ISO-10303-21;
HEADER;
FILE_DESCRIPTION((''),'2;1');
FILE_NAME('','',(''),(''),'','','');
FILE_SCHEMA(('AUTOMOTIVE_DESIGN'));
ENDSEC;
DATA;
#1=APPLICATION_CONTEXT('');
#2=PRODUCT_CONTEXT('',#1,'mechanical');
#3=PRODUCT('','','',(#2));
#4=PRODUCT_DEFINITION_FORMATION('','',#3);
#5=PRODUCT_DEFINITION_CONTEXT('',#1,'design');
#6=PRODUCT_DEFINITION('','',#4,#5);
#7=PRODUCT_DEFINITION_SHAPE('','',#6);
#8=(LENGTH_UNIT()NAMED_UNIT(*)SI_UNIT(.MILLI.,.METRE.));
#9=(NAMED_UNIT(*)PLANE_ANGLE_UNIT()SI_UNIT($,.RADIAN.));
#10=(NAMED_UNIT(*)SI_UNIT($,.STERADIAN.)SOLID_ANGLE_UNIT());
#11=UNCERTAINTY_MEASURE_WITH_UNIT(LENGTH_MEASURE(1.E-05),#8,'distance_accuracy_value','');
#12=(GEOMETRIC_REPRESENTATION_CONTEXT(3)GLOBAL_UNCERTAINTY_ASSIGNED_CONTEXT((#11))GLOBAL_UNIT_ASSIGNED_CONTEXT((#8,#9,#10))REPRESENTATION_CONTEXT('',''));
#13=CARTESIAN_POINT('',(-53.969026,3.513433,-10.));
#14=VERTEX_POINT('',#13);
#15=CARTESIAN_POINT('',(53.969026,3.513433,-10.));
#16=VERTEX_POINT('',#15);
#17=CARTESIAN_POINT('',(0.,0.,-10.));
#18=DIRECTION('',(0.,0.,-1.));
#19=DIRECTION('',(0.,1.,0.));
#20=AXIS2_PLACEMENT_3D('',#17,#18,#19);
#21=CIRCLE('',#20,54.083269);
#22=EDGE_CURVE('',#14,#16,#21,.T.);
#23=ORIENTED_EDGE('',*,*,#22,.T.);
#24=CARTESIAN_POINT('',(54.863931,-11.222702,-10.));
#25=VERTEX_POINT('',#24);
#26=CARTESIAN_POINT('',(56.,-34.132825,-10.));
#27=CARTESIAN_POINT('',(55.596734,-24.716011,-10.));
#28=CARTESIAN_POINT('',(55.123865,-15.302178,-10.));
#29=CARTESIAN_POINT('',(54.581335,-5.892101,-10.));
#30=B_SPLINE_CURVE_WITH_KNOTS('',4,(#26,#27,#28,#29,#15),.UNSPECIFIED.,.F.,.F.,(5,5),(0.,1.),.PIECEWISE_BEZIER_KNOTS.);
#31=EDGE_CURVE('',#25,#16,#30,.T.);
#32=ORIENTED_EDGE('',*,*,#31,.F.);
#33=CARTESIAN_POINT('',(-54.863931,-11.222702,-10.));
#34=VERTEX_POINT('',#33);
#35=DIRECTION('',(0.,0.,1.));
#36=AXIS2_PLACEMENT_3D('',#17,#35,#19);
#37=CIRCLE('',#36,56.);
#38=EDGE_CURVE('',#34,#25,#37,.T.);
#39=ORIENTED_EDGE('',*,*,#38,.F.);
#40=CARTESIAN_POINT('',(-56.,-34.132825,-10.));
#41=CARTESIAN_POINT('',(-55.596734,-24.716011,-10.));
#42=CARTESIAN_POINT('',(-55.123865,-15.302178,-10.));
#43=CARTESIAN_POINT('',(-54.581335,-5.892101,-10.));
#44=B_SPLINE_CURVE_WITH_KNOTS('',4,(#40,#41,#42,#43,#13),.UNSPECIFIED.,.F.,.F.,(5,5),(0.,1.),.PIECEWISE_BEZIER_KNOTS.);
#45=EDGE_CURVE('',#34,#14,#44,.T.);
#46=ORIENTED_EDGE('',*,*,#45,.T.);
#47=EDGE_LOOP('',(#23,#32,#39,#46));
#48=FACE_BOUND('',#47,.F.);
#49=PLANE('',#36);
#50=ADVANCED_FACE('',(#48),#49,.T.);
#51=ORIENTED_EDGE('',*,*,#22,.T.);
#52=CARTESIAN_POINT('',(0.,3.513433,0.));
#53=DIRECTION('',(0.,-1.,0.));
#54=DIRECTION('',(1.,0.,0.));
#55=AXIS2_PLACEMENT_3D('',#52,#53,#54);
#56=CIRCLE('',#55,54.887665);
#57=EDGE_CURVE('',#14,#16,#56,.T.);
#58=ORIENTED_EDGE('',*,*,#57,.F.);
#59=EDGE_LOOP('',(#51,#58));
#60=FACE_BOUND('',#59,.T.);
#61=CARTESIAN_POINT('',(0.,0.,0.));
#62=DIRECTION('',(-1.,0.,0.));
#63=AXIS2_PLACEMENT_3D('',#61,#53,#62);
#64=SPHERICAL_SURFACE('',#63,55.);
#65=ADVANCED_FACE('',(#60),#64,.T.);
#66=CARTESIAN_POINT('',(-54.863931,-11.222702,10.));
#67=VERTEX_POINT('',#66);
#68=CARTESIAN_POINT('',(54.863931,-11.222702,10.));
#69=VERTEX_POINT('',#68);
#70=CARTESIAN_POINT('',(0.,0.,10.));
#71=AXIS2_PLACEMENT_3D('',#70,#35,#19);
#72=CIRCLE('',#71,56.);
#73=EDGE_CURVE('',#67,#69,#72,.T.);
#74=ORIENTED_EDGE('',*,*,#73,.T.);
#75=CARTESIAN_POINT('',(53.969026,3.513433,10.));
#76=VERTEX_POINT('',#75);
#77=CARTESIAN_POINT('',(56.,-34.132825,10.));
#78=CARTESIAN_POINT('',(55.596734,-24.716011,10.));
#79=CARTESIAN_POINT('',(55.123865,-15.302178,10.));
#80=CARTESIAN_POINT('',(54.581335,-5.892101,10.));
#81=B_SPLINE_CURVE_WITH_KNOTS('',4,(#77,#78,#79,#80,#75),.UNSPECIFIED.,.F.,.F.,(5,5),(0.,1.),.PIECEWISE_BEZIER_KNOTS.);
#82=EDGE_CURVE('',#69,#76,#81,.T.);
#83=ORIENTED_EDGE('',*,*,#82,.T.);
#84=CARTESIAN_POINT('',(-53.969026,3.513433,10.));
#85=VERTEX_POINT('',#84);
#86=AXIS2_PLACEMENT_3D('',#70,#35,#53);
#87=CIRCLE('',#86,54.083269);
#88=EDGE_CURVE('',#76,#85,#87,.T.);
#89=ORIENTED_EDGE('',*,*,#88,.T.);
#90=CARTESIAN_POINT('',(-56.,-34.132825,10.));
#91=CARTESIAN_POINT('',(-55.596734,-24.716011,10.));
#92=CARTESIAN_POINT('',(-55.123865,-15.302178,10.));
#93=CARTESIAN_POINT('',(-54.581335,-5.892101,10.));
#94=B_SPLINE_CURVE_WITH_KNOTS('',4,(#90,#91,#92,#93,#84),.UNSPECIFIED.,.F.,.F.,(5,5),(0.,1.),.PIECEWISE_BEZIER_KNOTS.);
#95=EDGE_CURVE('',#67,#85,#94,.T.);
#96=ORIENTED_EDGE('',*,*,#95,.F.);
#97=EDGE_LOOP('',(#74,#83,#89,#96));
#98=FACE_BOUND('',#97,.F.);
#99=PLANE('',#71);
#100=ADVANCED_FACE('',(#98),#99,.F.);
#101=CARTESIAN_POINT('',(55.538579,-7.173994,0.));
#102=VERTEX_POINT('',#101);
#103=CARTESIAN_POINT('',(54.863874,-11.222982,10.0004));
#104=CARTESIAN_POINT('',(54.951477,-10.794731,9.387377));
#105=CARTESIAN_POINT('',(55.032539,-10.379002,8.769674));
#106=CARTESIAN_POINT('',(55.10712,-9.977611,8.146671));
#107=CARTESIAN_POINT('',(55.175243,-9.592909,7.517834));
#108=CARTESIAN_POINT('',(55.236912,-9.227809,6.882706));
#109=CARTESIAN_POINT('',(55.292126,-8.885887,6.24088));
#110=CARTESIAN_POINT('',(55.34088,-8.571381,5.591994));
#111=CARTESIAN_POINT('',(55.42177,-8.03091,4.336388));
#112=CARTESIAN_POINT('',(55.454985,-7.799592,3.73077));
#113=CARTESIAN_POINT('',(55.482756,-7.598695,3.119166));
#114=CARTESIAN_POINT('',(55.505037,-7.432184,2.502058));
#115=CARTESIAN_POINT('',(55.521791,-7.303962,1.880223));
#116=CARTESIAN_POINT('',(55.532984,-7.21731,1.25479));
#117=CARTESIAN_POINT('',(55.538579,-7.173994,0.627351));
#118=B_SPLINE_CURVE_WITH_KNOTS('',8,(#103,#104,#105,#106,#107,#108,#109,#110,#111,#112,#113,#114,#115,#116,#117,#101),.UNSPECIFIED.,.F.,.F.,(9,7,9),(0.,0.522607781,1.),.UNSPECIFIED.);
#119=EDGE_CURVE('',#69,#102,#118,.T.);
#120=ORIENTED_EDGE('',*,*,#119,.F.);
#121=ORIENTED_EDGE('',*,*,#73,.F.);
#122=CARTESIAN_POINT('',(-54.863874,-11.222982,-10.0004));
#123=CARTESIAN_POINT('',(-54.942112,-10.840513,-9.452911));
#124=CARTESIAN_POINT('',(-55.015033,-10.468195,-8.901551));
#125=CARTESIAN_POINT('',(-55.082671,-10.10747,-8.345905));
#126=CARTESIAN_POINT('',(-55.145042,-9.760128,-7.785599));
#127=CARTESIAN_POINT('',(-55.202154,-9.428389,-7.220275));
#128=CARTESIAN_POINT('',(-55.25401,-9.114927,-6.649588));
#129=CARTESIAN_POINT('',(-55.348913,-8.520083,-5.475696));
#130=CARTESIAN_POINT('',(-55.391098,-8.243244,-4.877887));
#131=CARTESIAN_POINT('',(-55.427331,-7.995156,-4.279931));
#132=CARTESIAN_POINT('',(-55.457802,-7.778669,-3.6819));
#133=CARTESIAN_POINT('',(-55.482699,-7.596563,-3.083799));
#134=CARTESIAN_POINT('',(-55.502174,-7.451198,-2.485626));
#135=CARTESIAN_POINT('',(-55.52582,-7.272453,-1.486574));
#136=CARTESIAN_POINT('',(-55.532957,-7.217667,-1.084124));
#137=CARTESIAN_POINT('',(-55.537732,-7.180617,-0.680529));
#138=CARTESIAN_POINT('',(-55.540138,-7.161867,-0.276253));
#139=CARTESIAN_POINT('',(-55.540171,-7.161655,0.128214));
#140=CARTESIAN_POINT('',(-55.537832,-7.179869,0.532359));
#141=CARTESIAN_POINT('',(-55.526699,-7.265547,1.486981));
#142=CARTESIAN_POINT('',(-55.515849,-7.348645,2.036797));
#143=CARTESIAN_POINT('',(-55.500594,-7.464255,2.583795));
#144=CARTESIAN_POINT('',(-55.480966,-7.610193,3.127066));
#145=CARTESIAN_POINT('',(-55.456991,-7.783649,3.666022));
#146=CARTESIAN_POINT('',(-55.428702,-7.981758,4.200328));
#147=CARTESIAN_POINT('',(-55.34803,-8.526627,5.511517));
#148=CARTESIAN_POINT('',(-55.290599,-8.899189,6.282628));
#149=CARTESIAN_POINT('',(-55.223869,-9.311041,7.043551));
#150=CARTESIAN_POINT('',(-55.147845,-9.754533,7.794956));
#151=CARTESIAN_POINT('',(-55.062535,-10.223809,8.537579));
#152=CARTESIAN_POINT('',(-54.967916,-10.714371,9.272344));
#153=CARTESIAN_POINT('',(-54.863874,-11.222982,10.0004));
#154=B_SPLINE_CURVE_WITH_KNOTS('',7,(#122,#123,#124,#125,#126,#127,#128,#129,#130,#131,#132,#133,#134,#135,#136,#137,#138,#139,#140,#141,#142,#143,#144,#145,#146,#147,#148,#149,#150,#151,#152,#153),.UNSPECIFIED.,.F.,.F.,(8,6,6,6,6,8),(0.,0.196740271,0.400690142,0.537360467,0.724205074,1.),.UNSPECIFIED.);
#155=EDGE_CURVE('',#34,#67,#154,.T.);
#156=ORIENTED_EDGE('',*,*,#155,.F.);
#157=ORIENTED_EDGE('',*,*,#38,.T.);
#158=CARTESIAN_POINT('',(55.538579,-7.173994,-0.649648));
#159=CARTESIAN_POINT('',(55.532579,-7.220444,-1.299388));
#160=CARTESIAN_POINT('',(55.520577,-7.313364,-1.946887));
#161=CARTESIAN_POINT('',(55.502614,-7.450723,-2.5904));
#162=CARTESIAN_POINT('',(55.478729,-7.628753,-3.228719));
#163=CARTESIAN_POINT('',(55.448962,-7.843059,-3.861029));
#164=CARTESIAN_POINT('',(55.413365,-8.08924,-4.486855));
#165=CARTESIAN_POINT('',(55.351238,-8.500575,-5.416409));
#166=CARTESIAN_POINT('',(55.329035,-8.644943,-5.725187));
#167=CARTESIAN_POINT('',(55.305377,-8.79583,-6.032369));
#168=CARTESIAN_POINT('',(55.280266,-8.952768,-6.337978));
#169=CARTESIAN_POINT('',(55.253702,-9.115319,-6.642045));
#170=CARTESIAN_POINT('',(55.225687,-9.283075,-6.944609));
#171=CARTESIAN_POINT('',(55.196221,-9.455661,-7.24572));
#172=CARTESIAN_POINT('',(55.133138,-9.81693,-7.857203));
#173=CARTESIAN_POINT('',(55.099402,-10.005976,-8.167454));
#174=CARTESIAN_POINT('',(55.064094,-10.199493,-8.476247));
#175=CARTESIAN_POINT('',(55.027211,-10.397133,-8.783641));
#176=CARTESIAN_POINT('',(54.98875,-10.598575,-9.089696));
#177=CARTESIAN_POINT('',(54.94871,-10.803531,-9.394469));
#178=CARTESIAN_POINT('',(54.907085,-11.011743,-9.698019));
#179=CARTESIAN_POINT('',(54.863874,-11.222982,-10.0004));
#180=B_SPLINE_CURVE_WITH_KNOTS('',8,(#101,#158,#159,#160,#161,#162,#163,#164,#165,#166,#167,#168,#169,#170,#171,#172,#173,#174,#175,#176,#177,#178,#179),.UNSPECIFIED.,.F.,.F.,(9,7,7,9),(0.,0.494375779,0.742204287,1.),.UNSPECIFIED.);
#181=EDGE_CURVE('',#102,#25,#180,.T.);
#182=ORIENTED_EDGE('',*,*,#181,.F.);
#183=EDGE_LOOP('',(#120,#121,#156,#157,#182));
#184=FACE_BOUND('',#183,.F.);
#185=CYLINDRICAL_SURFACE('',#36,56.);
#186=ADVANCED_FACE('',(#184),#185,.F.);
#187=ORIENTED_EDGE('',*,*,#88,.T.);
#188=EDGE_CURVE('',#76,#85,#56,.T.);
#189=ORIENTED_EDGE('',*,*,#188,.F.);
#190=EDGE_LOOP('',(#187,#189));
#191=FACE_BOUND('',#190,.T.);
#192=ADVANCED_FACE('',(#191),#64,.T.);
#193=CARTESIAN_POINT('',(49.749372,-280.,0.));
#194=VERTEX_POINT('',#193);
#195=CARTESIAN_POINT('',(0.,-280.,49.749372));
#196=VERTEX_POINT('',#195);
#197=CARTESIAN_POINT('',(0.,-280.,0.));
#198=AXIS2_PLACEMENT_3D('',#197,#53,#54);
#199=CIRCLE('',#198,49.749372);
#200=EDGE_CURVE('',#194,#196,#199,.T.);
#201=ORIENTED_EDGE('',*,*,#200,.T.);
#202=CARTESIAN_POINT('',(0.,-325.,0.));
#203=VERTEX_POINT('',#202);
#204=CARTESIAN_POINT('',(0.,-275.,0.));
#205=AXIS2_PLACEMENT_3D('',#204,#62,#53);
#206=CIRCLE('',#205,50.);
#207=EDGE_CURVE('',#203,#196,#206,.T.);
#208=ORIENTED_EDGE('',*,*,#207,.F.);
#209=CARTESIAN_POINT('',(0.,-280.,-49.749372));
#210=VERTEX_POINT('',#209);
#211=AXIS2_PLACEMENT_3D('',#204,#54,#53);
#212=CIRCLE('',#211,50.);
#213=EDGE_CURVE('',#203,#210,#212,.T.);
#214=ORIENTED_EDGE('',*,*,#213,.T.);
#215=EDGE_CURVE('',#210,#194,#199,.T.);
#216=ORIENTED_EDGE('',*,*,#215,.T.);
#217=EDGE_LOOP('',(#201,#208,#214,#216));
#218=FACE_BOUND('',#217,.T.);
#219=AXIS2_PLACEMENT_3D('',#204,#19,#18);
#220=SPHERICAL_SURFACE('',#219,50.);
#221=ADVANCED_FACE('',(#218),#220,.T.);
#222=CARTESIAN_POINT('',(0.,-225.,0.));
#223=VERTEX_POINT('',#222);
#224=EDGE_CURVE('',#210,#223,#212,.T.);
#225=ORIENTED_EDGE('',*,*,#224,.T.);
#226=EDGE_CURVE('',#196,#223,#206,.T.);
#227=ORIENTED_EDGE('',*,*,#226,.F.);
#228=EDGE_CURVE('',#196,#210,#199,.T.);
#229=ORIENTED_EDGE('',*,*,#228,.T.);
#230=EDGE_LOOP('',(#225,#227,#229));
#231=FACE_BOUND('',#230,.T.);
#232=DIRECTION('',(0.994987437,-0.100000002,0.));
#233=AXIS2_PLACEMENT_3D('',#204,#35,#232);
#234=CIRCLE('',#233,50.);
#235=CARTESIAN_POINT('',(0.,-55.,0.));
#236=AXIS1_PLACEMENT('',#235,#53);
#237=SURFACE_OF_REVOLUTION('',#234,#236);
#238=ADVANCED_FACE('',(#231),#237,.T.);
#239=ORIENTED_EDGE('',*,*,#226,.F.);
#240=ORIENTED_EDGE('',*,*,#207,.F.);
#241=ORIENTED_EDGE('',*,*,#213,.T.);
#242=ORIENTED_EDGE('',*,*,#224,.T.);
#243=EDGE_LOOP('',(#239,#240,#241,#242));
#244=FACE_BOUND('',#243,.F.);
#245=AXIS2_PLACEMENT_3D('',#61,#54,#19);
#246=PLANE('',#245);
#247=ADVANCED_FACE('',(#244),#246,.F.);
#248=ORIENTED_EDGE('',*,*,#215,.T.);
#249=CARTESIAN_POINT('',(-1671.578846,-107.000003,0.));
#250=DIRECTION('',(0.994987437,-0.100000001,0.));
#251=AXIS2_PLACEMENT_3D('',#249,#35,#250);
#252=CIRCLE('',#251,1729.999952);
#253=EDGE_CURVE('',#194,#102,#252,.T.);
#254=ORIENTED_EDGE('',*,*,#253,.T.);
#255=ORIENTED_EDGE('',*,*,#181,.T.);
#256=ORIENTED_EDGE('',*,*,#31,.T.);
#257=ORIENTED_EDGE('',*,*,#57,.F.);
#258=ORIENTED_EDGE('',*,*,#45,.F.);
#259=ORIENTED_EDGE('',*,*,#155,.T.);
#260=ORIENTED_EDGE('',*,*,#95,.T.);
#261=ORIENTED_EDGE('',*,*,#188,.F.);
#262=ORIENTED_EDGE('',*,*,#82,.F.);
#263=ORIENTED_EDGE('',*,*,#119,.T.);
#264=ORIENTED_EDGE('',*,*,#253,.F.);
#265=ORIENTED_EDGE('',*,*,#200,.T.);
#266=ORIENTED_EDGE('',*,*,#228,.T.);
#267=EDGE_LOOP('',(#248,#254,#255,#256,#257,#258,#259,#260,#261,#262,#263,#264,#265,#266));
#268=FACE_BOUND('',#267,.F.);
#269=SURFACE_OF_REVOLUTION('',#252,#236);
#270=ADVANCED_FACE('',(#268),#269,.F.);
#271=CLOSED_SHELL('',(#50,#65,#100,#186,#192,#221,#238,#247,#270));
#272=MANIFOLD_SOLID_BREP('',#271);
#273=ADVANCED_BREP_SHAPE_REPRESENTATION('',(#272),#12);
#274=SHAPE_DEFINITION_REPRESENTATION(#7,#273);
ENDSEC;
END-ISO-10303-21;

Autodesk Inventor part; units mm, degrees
ref_plane "YZ Plane" through (0, 0, 0) normal (1, 0, 0) x (0, 1, 0)
ref_plane "XZ Plane" through (0, 0, 0) normal (0, 1, 0) x (-1, 0, 0)
ref_plane "XY Plane" through (0, 0, 0) normal (0, 0, 1) x (1, 0, 0)
sketch "Эскиз1" plane through (0, 0, 0) normal (0, 0, 1) x (1, 0, 0)
  arc A0 (0, 55) -> (0, -55) centre (0, 0) ccw
  line L0 (0, 55) -> (0, -55)
  dimension "d0" = 55
revolve "Вращение1" add sketch "Эскиз1" angle 360 about axis through (0, 55, 0) along (0, -1, 0)
sketch "Эскиз2" plane through (0, 0, 0) normal (1, 0, 0) x (0, 1, 0)
  line L0 (0, -10) -> (0, 10)
  line L1 (0, -10) -> (56, -10)
  line L2 (56, -10) -> (56, 10)
  line L3 (56, 10) -> (0, 10)
  point P0 (0, 0)
  point P1 (0, 0)
  dimension "d2" = 20
  dimension "d3" = 56
sketch "Эскиз3" plane through (0, 0, 0) normal (1, 0, 0) x (0, 1, 0)
  arc A0 (-325, 0) -> (-225, 0) centre (-275, 0) ccw
  line L0 (-225, 0) -> (-325, 0)
  point P0 (0, 0)
  dimension "d5" = 275
  dimension "d6" = 50
revolve "Вращение3" add sketch "Эскиз3" angle 180 about axis through (0, -225, 0) along (0, -1, 0)
sketch "Эскиз4" plane through (0, 0, 0) normal (0, 0, 1) x (1, 0, 0)
  line L0 (0, -325) -> (0, -225) construction
  line L1 (0, -325) -> (0, -225)
  line L2 (0, 5) -> (0, -225)
  arc A0 (49.749372, -280) -> (54.887665, 3.513433) centre (-1671.578894, -107) ccw
  line L3 (54.791865, 5) -> (0, 5) construction
  line L4 (49.749372, -280) -> (0, -280) construction
  arc A1 (0, -55) -> (54.887665, 3.513433) centre (0, 0) ccw
  arc A2 (49.749372, -280) -> (0, -225) centre (0, -275) ccw
  arc A3 (0, -325) -> (49.749372, -280) centre (0, -275) ccw construction
  arc A4 (0, -225) -> (0, -325) centre (0, -275) ccw construction
  arc A5 (54.772256, 5) -> (-54.772256, 5) centre (0, 0) ccw construction
  arc A6 (-54.772256, 5) -> (0, -55) centre (0, 0) ccw
  arc A7 (54.887665, 3.513433) -> (54.772256, 5) centre (0, 0) ccw construction
  point P0 (0, -128.982251)
  dimension "d10" = 5
  dimension "d11" = 110
  dimension "d12" = 5
revolve "Вращение4" add sketch "Эскиз4" angle 360 about axis through (0, 5, 0) along (0, -1, 0)
revolve "Вращение5" cut sketch "Эскиз2" angle 360 about axis through (0, 0, -10) along (0, 0, 1)
equation "\"d0\" = Shoulder_width"
equation "\"d5\" = shoulder_height"
equation "\"d11\" = 2 * Shoulder_width"
equation "\"shoulder_height\" = 275"
equation "\"Shoulder_width\" = 55"
properties part number "ч ASY human dummy 01"
